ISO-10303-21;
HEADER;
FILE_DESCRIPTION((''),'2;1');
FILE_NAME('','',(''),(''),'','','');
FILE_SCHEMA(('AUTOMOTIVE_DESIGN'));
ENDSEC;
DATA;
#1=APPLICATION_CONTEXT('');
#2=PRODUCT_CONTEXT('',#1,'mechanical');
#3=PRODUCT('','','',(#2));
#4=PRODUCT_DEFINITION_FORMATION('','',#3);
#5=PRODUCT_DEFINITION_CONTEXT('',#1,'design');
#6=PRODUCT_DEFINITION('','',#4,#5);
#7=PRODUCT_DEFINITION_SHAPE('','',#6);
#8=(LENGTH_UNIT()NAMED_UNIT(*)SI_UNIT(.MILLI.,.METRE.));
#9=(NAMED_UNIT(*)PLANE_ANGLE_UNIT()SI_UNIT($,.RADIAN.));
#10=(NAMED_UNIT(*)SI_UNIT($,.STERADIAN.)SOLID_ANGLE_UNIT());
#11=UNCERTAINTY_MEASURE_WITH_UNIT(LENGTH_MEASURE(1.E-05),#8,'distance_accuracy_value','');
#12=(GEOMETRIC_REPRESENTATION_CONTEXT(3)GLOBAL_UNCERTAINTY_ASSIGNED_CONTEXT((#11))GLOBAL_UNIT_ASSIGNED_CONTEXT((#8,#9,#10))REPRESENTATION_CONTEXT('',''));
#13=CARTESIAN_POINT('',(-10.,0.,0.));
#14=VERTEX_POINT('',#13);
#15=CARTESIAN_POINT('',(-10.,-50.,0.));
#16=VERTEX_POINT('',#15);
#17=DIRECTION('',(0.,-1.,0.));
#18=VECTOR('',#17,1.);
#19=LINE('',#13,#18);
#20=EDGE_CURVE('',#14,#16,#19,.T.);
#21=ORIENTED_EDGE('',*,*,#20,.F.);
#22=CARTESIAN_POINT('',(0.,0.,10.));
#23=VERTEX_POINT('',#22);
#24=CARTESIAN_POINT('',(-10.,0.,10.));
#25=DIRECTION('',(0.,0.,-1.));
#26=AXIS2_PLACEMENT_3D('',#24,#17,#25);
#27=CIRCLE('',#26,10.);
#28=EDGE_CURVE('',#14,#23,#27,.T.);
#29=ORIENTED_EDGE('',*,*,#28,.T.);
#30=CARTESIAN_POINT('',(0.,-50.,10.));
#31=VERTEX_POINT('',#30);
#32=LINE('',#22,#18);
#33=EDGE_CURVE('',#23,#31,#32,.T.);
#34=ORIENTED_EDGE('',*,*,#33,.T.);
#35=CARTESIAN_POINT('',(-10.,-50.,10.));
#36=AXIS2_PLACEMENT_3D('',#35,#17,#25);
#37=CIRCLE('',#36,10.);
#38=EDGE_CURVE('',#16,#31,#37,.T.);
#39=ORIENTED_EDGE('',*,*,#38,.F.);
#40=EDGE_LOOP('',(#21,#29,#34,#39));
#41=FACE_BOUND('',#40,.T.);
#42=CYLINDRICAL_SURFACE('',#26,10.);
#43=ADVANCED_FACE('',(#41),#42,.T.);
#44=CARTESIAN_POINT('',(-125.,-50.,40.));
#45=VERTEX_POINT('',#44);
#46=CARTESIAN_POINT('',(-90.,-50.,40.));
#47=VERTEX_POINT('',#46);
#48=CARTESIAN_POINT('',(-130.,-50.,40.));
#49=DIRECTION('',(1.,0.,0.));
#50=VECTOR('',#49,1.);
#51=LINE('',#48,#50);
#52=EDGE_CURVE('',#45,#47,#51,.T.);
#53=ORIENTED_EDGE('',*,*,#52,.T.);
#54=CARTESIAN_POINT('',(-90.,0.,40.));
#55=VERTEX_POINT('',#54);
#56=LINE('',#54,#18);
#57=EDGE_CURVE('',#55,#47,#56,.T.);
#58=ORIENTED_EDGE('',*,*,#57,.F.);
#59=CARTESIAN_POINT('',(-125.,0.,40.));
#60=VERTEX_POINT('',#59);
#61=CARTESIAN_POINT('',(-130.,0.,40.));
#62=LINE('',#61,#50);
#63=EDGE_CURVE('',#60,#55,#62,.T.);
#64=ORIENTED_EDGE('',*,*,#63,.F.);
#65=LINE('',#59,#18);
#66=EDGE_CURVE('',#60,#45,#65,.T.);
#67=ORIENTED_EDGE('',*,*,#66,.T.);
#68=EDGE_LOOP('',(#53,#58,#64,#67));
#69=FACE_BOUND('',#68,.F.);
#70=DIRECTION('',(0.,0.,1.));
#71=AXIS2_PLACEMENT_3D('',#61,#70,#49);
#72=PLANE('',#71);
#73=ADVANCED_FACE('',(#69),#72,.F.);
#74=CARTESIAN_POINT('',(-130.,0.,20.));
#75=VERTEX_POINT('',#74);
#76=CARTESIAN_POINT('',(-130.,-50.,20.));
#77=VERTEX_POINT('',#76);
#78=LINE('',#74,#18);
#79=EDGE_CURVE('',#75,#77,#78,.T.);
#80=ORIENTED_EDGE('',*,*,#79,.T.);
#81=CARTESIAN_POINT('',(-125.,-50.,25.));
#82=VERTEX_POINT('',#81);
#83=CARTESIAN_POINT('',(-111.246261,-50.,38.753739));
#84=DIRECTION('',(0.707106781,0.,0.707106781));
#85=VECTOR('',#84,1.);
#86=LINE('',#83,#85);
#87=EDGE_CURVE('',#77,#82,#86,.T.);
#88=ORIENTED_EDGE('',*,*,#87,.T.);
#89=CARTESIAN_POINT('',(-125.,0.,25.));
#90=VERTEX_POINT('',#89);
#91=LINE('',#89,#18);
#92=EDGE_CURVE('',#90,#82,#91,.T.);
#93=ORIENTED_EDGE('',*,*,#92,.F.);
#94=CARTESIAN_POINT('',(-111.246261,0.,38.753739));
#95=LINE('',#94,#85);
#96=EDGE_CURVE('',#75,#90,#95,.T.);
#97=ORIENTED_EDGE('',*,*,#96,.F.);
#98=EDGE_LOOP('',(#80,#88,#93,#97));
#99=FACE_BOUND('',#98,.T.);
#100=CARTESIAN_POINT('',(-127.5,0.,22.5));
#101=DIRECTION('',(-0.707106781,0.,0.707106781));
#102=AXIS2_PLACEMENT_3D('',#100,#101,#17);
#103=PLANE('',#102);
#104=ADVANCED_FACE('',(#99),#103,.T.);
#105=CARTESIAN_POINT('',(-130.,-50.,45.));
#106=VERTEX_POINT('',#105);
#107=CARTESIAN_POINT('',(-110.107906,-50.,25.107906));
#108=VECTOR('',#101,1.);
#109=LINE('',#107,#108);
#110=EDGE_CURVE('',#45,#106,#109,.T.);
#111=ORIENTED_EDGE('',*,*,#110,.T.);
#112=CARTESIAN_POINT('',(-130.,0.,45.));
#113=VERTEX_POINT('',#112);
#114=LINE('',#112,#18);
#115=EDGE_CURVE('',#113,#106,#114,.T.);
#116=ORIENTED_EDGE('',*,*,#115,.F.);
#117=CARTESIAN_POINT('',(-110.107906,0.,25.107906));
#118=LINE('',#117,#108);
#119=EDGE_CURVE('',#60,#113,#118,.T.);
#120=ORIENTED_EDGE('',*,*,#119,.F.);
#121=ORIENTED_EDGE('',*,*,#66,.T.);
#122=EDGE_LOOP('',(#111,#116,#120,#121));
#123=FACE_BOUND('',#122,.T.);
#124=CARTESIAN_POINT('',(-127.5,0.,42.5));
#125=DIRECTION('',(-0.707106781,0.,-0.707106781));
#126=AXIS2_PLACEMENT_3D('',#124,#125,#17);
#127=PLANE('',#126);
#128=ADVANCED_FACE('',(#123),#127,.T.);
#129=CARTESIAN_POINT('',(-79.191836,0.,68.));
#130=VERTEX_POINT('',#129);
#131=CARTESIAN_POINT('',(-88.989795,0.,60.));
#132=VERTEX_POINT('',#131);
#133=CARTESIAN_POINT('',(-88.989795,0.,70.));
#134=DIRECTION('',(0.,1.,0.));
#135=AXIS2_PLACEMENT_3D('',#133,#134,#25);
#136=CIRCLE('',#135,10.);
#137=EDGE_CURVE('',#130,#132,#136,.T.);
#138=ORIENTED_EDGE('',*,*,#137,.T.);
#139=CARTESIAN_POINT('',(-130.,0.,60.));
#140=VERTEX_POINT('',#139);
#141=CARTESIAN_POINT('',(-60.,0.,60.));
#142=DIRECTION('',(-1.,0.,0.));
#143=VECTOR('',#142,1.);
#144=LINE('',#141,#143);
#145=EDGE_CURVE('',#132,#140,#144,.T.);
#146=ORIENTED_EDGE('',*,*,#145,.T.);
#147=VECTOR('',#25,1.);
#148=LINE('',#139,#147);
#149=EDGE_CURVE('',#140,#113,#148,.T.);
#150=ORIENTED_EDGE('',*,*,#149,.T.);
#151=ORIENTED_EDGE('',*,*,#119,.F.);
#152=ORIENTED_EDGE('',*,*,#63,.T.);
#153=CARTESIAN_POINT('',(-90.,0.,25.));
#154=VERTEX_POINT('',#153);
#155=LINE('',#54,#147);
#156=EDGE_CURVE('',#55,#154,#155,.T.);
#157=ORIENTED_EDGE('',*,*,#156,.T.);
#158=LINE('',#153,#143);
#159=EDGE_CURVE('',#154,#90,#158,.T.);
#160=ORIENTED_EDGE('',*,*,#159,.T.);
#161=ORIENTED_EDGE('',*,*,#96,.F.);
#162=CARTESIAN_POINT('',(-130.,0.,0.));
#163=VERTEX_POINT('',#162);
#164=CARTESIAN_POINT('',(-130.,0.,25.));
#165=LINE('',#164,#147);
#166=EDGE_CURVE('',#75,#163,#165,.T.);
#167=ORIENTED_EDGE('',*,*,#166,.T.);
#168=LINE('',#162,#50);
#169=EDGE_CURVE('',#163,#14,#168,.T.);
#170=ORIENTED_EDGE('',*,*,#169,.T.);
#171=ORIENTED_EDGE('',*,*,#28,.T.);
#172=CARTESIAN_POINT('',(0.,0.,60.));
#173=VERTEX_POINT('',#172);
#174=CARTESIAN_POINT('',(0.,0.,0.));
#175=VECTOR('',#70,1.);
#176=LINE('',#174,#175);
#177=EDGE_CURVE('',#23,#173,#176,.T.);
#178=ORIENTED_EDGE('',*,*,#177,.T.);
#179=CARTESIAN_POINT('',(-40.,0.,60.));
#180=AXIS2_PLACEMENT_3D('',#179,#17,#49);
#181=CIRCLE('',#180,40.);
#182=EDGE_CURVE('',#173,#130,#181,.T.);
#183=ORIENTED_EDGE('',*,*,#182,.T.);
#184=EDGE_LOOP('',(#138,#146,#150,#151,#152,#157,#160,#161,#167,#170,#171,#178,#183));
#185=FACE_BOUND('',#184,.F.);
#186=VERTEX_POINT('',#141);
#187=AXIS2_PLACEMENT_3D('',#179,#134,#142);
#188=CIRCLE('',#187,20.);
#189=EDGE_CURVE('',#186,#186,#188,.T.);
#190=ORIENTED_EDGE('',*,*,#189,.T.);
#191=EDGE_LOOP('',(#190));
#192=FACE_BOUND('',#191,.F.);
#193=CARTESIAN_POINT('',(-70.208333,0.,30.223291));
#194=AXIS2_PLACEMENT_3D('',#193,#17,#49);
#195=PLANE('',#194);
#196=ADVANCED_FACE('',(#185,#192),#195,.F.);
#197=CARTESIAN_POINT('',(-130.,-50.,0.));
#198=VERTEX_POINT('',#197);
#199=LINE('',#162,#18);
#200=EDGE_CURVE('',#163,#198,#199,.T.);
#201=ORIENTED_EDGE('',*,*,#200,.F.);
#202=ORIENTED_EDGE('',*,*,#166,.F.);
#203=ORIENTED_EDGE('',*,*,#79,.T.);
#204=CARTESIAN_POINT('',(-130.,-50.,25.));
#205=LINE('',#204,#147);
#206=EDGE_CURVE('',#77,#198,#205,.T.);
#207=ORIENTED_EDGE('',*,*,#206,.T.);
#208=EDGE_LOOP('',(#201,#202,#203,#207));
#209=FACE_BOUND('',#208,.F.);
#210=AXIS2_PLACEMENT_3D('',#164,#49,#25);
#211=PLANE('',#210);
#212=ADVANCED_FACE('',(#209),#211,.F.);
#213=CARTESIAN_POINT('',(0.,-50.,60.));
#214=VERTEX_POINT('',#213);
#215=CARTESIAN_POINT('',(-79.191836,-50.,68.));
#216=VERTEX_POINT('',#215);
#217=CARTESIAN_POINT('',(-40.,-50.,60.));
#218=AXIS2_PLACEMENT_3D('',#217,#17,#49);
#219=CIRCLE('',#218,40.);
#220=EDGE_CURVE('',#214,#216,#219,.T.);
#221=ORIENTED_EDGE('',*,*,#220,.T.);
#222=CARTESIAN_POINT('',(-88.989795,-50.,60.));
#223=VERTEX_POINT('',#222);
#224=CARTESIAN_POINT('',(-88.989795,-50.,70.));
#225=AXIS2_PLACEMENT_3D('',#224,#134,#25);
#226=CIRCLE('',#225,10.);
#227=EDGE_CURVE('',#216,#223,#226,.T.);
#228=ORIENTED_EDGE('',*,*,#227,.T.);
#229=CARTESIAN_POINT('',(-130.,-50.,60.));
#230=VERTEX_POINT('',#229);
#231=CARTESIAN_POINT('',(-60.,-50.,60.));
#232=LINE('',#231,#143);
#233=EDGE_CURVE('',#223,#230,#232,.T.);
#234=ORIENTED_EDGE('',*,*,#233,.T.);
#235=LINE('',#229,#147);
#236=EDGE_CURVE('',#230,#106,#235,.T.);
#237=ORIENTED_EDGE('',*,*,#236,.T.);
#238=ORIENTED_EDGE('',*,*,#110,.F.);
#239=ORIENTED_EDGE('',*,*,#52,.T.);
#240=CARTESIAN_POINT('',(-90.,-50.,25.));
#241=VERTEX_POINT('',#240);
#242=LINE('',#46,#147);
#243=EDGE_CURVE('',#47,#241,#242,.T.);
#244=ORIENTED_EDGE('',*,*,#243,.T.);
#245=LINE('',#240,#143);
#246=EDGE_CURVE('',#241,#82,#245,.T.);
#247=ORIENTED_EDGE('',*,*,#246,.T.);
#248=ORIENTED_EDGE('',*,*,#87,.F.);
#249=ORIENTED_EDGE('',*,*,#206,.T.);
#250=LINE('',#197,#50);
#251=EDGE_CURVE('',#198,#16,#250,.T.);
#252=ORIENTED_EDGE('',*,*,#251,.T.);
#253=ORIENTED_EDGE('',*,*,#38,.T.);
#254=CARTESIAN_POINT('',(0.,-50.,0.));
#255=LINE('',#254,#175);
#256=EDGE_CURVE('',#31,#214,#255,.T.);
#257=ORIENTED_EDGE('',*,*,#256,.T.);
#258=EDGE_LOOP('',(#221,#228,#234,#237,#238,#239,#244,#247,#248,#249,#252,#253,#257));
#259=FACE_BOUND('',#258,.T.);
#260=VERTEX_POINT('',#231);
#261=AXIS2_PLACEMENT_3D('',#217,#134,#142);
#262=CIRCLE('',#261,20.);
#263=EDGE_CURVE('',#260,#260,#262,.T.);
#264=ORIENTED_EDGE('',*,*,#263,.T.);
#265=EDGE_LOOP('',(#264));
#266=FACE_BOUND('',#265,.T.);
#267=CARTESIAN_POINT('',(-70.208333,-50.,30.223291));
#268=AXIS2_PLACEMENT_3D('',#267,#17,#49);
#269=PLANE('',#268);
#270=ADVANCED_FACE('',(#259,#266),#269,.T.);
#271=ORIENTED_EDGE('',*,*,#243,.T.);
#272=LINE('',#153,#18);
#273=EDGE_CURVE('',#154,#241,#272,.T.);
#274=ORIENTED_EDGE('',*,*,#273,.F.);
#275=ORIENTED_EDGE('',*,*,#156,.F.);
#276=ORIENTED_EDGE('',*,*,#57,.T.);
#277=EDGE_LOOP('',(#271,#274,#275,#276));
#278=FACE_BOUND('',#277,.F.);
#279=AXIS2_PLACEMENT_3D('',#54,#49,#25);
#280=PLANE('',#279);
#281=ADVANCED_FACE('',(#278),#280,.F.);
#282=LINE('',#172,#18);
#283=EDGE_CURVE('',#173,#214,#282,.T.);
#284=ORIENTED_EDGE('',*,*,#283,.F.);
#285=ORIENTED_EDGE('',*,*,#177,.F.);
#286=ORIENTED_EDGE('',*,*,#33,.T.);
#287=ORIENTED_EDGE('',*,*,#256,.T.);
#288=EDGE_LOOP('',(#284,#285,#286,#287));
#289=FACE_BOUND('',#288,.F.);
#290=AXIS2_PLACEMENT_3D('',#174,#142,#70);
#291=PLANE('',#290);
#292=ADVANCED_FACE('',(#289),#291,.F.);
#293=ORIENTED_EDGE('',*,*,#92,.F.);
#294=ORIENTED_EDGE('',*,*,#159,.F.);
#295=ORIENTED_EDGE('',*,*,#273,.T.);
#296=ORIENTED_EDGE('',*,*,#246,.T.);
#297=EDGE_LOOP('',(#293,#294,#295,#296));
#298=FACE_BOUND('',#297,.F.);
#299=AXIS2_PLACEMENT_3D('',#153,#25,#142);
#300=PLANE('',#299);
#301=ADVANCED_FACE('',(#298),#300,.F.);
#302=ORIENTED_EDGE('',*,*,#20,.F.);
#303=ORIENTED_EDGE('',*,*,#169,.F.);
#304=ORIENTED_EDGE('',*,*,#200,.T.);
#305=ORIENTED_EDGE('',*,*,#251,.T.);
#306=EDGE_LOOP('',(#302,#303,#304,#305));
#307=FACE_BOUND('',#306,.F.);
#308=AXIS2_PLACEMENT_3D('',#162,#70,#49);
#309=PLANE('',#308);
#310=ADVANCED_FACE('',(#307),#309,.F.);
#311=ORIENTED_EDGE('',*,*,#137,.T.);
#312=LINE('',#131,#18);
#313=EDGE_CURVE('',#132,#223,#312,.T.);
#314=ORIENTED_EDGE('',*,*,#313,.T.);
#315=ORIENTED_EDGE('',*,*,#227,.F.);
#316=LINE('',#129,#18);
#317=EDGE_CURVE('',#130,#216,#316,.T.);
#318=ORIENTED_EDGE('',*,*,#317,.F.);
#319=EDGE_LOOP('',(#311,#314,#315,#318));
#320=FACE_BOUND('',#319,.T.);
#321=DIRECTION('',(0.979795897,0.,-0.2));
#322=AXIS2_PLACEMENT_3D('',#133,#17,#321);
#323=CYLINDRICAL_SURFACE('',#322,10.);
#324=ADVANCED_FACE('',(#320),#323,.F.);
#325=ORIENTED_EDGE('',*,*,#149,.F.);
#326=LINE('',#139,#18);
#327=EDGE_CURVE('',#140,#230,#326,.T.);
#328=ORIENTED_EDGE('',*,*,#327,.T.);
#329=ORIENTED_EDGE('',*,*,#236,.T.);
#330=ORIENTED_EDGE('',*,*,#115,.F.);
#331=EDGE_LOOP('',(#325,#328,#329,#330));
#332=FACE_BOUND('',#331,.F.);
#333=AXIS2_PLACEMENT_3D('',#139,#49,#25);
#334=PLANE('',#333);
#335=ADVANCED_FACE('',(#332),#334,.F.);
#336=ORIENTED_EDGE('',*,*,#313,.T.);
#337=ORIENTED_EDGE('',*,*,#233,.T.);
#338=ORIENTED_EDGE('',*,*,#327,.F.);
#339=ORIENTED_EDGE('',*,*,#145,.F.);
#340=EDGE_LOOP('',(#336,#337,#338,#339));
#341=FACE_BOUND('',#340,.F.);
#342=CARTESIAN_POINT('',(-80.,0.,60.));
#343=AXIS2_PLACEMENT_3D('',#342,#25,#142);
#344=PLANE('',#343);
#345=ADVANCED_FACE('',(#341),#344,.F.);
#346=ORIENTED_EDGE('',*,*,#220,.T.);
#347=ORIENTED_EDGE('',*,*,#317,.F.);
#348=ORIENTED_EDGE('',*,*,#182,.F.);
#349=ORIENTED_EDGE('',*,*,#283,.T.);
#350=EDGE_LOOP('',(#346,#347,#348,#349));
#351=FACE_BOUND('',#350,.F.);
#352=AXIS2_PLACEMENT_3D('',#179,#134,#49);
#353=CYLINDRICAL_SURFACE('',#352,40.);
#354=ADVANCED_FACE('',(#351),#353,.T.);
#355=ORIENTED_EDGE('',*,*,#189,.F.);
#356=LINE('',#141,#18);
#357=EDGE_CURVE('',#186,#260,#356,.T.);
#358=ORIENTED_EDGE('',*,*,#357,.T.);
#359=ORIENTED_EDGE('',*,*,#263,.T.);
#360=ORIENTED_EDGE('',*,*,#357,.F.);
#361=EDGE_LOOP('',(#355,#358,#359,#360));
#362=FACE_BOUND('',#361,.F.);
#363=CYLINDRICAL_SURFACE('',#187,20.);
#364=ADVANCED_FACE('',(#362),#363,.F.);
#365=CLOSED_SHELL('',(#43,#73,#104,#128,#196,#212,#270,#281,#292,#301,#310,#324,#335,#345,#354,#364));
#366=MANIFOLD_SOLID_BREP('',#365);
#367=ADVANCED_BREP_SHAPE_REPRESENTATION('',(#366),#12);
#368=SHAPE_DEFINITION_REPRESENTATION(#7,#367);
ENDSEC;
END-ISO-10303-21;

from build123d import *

# Parameters (mm, degrees)
F1_DEPTH = 50
F2_R     = 10
F3_SIZE  = 5


with BuildPart() as f1:
    # F0 (on Front) → F1 (new body)
    with BuildSketch(Plane.XZ):
        with BuildLine():
            Line((-130, 0), (0, 0))
            Line((0, 0), (0, 60))
            Line((0, 60), (-20, 60))
            ThreePointArc((-20, 60), (-40, 40), (-60, 60))
            Line((-60, 60), (-80, 60))
            Line((-80, 60), (-130, 60))
            Line((-130, 60), (-130, 40))
            Line((-130, 40), (-90, 40))
            Line((-90, 40), (-90, 25))
            Line((-90, 25), (-130, 25))
            Line((-130, 25), (-130, 0))
        make_face()
        with BuildLine():
            Line((-20, 60), (0, 60))
            ThreePointArc((0, 60), (-40, 100), (-80, 60))
            Line((-80, 60), (-60, 60))
            ThreePointArc((-60, 60), (-40, 80), (-20, 60))
        make_face()
    extrude(amount=F1_DEPTH)

    # F2
    f2_edges = [f1.edges().sort_by_distance(p)[0] for p in [
        (0, -25, 60),
        (0, -25, 0),
        (-80, -25, 60),
    ]]
    fillet(f2_edges, radius=F2_R)

    # F3
    f3_edges = [f1.edges().sort_by_distance(p)[0] for p in [
        (-130, -25, 40),
        (-130, -25, 25),
    ]]
    chamfer(f3_edges, length=F3_SIZE)


solid = f1.part
